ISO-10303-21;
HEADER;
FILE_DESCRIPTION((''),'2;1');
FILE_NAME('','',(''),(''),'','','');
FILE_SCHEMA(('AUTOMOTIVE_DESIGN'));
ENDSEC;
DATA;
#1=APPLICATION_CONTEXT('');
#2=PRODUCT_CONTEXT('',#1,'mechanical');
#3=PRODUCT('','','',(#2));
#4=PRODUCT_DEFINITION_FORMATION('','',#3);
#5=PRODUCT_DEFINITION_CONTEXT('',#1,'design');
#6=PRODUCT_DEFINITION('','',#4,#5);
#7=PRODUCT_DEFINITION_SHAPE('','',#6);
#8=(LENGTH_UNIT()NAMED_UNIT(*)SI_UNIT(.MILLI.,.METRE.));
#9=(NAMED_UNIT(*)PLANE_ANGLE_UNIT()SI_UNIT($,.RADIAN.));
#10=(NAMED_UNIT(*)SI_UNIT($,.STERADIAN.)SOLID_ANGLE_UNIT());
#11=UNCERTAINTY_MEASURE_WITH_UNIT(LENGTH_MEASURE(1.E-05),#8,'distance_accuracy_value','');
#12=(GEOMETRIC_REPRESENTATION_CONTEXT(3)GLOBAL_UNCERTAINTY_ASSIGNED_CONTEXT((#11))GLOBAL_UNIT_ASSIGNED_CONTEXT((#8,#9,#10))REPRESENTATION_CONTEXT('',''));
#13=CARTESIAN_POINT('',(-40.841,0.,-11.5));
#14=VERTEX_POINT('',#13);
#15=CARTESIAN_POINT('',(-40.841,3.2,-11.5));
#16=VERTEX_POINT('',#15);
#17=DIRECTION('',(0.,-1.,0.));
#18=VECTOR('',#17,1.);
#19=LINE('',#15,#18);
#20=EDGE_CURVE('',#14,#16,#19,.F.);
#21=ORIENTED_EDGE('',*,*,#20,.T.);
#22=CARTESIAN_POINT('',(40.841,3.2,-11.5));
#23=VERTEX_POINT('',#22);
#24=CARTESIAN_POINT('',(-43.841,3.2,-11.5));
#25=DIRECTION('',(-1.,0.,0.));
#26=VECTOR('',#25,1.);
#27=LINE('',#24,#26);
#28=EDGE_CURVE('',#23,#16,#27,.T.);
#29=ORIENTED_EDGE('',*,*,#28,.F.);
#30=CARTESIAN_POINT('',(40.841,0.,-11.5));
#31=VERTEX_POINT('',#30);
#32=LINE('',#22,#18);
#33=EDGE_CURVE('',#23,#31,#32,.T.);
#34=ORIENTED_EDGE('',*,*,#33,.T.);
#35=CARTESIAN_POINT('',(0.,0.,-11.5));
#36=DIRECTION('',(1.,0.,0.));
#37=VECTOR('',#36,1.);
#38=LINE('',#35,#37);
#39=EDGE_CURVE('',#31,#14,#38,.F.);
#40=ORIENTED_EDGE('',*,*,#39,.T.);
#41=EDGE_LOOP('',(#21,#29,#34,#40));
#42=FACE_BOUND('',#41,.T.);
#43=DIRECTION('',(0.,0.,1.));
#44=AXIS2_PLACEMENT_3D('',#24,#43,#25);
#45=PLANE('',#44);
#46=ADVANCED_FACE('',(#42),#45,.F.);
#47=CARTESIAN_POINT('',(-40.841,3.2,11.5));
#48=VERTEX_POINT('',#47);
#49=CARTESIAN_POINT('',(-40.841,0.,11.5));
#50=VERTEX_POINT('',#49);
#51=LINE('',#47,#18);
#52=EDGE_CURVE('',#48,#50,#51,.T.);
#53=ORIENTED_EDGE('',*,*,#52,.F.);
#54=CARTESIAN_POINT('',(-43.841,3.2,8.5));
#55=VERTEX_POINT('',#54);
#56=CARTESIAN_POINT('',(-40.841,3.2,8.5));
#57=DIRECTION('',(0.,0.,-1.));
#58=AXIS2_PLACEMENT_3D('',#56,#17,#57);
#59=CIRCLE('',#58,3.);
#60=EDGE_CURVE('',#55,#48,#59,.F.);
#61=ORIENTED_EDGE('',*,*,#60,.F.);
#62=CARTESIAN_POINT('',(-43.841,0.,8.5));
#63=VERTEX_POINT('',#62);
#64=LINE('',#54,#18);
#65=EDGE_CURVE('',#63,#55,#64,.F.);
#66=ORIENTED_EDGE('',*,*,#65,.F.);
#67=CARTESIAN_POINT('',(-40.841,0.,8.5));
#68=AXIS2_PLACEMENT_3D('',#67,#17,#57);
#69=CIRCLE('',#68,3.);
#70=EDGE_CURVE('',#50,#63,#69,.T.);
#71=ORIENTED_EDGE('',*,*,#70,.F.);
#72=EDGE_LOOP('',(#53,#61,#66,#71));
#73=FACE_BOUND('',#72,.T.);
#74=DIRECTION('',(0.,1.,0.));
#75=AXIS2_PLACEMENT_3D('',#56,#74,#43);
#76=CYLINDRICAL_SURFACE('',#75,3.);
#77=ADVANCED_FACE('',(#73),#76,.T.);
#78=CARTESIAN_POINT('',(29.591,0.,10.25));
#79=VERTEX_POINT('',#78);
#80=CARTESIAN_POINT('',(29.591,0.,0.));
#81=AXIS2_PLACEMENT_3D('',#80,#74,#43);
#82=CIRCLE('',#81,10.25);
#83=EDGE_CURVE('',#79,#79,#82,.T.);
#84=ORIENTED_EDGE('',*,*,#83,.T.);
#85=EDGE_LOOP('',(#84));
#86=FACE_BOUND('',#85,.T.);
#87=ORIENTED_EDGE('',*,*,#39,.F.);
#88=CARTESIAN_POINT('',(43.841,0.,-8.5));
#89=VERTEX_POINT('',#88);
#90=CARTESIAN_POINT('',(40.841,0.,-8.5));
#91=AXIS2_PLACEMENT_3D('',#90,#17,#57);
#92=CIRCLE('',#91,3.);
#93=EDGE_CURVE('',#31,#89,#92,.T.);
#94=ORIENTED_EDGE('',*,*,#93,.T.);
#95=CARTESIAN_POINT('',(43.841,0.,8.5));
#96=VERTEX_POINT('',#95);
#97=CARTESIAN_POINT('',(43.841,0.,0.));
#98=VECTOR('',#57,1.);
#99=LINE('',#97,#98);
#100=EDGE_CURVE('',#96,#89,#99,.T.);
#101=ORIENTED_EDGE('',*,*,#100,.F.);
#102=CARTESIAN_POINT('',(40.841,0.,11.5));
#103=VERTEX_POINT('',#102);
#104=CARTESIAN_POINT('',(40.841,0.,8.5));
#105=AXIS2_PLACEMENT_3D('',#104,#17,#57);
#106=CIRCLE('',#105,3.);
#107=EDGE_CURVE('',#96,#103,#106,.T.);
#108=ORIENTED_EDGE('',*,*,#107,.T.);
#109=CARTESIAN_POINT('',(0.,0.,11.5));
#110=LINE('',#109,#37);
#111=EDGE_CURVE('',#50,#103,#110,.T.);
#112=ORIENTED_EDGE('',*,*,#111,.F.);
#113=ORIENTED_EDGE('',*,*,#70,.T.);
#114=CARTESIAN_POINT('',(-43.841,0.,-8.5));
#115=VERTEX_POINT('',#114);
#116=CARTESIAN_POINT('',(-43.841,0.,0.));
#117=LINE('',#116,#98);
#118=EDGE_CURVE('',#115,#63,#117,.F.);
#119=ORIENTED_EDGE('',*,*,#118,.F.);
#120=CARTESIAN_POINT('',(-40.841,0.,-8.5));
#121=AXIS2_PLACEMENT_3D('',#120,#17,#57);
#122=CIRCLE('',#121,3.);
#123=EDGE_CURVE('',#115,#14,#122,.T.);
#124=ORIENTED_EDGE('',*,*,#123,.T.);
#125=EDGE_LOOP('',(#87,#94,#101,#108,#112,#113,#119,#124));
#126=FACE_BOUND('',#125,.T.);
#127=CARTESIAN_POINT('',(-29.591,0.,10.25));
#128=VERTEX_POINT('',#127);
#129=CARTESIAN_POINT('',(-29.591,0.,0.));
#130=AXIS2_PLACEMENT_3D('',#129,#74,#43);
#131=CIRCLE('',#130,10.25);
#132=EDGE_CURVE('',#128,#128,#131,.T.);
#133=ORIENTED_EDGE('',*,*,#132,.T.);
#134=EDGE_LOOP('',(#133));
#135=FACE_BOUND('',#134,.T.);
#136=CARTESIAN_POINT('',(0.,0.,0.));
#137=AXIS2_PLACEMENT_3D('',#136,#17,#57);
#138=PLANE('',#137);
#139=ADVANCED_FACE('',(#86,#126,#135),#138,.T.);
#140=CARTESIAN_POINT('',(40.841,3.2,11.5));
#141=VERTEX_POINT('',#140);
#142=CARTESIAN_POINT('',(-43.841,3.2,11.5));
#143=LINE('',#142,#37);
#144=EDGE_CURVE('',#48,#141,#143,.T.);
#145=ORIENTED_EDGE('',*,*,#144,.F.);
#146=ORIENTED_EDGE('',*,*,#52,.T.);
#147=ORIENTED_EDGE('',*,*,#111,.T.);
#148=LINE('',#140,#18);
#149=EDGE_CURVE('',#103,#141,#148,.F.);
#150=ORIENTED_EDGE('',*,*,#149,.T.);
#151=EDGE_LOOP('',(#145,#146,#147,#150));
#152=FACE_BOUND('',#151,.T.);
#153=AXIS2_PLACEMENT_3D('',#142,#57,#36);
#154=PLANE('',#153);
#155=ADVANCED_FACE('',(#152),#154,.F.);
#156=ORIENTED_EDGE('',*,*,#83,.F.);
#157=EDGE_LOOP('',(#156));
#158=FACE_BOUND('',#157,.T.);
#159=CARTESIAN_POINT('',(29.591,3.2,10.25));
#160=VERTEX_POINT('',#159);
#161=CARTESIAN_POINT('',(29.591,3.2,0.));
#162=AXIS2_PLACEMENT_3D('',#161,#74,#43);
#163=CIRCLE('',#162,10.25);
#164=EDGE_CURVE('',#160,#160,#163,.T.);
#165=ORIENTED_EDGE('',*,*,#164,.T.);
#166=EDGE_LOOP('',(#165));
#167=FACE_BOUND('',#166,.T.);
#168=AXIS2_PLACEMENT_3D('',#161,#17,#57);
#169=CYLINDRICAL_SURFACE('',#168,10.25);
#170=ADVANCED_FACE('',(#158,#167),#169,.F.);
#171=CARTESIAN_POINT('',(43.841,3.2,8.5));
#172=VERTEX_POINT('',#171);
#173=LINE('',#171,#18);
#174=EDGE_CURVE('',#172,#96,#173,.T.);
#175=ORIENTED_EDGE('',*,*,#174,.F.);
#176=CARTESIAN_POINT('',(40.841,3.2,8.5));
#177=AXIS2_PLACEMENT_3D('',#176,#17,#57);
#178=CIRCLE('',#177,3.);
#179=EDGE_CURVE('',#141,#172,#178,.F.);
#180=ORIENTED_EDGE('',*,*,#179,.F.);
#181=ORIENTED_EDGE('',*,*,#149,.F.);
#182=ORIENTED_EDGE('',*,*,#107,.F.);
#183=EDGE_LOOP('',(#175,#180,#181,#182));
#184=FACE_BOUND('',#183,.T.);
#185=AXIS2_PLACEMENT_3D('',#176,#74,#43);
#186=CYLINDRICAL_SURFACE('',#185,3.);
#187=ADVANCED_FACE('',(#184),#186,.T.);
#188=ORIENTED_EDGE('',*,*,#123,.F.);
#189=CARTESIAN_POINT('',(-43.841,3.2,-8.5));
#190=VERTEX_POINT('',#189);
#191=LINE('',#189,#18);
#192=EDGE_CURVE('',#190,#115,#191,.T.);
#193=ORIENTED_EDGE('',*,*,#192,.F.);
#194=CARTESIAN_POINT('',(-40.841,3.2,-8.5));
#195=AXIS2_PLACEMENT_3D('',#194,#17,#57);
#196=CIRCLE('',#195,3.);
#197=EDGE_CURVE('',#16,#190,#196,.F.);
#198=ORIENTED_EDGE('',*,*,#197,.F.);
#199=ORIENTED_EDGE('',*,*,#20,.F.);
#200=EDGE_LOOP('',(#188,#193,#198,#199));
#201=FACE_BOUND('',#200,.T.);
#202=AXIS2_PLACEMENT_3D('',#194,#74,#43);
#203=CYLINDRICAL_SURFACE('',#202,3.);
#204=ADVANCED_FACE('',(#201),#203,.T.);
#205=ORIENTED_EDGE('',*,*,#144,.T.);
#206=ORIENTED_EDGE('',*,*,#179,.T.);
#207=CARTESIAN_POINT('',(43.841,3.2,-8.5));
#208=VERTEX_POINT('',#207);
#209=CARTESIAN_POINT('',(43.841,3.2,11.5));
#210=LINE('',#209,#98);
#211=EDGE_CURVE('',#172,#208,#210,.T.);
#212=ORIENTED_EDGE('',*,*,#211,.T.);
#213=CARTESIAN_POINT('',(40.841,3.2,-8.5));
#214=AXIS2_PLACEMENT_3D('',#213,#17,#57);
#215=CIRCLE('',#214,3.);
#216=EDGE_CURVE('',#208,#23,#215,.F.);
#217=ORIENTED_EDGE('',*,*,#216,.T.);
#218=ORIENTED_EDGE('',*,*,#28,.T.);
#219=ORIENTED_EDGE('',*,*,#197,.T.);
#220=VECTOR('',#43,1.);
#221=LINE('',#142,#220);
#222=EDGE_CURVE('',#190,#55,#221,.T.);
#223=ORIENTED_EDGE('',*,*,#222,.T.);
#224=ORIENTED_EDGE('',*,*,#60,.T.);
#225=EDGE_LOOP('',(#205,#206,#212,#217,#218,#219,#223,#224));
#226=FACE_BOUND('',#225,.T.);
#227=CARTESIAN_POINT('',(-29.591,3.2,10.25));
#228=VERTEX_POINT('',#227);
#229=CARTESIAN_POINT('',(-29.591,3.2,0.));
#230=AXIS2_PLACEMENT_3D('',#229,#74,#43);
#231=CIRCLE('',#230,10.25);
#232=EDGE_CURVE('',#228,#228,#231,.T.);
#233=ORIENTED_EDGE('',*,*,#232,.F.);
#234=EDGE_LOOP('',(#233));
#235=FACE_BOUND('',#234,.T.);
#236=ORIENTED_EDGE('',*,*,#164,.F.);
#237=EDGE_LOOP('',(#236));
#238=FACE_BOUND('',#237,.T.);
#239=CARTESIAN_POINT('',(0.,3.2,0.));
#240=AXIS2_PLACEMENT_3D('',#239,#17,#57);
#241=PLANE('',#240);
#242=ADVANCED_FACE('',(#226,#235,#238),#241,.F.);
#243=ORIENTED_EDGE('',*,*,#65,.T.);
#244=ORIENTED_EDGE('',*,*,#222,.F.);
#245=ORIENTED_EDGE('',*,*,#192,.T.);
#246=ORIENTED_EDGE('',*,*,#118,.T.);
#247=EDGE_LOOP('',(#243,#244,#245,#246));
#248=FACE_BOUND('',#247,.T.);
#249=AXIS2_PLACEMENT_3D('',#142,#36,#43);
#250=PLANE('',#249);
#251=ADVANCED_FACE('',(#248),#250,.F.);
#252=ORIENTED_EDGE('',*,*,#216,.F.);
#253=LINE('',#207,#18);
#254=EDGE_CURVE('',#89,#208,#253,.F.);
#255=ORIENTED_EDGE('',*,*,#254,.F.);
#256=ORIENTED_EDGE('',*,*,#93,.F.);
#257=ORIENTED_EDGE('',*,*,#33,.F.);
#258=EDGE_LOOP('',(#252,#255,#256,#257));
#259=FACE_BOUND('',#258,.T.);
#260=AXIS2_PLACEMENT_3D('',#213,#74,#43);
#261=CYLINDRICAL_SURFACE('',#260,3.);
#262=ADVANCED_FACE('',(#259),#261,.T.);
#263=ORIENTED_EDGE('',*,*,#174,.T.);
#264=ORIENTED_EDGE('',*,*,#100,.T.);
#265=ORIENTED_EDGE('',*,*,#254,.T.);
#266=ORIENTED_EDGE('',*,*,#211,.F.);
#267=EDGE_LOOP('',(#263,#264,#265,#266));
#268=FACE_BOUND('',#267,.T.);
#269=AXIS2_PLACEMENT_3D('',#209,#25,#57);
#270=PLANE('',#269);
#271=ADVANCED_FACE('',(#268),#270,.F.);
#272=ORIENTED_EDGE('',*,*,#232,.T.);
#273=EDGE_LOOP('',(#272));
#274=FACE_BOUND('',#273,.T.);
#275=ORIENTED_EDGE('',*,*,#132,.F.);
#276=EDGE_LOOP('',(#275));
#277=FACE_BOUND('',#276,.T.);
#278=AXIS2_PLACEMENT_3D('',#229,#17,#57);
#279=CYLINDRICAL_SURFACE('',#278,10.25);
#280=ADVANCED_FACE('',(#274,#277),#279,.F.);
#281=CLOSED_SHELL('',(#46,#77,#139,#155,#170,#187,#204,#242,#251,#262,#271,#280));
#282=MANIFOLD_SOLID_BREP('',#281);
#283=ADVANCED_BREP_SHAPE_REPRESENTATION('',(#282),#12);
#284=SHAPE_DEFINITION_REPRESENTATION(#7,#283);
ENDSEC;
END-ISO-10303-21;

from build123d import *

# Parameters (mm, degrees)
SKETCH1_W           = 87.682
SKETCH1_H           = 23
SKETCH1_R           = 10.25
BOSS_EXTRUDE1_DEPTH = 3.2
FILLET1_R           = 3


with BuildPart() as part:
    # Sketch1 → Boss-Extrude1 (new body)
    with BuildSketch(Plane(origin=(0, 0, 0), x_dir=(1, 0, 0), z_dir=(0, 1, 0))):
        Rectangle(SKETCH1_W, SKETCH1_H)
        with Locations(Location((29.591, 0, 0), (0, 0, 270))):
            Circle(SKETCH1_R, mode=Mode.SUBTRACT)
        with Locations(Location((-29.591, 0, 0), (0, 0, 270))):
            Circle(SKETCH1_R, mode=Mode.SUBTRACT)
    extrude(amount=BOSS_EXTRUDE1_DEPTH)

    # Fillet1
    fillet1_edges = [part.edges().sort_by_distance(p)[0] for p in [
        (43.841, 1.6, -11.5),
        (43.841, 1.6, 11.5),
        (-43.841, 1.6, 11.5),
        (-43.841, 1.6, -11.5),
    ]]
    fillet(fillet1_edges, radius=FILLET1_R)


solid = part.part
